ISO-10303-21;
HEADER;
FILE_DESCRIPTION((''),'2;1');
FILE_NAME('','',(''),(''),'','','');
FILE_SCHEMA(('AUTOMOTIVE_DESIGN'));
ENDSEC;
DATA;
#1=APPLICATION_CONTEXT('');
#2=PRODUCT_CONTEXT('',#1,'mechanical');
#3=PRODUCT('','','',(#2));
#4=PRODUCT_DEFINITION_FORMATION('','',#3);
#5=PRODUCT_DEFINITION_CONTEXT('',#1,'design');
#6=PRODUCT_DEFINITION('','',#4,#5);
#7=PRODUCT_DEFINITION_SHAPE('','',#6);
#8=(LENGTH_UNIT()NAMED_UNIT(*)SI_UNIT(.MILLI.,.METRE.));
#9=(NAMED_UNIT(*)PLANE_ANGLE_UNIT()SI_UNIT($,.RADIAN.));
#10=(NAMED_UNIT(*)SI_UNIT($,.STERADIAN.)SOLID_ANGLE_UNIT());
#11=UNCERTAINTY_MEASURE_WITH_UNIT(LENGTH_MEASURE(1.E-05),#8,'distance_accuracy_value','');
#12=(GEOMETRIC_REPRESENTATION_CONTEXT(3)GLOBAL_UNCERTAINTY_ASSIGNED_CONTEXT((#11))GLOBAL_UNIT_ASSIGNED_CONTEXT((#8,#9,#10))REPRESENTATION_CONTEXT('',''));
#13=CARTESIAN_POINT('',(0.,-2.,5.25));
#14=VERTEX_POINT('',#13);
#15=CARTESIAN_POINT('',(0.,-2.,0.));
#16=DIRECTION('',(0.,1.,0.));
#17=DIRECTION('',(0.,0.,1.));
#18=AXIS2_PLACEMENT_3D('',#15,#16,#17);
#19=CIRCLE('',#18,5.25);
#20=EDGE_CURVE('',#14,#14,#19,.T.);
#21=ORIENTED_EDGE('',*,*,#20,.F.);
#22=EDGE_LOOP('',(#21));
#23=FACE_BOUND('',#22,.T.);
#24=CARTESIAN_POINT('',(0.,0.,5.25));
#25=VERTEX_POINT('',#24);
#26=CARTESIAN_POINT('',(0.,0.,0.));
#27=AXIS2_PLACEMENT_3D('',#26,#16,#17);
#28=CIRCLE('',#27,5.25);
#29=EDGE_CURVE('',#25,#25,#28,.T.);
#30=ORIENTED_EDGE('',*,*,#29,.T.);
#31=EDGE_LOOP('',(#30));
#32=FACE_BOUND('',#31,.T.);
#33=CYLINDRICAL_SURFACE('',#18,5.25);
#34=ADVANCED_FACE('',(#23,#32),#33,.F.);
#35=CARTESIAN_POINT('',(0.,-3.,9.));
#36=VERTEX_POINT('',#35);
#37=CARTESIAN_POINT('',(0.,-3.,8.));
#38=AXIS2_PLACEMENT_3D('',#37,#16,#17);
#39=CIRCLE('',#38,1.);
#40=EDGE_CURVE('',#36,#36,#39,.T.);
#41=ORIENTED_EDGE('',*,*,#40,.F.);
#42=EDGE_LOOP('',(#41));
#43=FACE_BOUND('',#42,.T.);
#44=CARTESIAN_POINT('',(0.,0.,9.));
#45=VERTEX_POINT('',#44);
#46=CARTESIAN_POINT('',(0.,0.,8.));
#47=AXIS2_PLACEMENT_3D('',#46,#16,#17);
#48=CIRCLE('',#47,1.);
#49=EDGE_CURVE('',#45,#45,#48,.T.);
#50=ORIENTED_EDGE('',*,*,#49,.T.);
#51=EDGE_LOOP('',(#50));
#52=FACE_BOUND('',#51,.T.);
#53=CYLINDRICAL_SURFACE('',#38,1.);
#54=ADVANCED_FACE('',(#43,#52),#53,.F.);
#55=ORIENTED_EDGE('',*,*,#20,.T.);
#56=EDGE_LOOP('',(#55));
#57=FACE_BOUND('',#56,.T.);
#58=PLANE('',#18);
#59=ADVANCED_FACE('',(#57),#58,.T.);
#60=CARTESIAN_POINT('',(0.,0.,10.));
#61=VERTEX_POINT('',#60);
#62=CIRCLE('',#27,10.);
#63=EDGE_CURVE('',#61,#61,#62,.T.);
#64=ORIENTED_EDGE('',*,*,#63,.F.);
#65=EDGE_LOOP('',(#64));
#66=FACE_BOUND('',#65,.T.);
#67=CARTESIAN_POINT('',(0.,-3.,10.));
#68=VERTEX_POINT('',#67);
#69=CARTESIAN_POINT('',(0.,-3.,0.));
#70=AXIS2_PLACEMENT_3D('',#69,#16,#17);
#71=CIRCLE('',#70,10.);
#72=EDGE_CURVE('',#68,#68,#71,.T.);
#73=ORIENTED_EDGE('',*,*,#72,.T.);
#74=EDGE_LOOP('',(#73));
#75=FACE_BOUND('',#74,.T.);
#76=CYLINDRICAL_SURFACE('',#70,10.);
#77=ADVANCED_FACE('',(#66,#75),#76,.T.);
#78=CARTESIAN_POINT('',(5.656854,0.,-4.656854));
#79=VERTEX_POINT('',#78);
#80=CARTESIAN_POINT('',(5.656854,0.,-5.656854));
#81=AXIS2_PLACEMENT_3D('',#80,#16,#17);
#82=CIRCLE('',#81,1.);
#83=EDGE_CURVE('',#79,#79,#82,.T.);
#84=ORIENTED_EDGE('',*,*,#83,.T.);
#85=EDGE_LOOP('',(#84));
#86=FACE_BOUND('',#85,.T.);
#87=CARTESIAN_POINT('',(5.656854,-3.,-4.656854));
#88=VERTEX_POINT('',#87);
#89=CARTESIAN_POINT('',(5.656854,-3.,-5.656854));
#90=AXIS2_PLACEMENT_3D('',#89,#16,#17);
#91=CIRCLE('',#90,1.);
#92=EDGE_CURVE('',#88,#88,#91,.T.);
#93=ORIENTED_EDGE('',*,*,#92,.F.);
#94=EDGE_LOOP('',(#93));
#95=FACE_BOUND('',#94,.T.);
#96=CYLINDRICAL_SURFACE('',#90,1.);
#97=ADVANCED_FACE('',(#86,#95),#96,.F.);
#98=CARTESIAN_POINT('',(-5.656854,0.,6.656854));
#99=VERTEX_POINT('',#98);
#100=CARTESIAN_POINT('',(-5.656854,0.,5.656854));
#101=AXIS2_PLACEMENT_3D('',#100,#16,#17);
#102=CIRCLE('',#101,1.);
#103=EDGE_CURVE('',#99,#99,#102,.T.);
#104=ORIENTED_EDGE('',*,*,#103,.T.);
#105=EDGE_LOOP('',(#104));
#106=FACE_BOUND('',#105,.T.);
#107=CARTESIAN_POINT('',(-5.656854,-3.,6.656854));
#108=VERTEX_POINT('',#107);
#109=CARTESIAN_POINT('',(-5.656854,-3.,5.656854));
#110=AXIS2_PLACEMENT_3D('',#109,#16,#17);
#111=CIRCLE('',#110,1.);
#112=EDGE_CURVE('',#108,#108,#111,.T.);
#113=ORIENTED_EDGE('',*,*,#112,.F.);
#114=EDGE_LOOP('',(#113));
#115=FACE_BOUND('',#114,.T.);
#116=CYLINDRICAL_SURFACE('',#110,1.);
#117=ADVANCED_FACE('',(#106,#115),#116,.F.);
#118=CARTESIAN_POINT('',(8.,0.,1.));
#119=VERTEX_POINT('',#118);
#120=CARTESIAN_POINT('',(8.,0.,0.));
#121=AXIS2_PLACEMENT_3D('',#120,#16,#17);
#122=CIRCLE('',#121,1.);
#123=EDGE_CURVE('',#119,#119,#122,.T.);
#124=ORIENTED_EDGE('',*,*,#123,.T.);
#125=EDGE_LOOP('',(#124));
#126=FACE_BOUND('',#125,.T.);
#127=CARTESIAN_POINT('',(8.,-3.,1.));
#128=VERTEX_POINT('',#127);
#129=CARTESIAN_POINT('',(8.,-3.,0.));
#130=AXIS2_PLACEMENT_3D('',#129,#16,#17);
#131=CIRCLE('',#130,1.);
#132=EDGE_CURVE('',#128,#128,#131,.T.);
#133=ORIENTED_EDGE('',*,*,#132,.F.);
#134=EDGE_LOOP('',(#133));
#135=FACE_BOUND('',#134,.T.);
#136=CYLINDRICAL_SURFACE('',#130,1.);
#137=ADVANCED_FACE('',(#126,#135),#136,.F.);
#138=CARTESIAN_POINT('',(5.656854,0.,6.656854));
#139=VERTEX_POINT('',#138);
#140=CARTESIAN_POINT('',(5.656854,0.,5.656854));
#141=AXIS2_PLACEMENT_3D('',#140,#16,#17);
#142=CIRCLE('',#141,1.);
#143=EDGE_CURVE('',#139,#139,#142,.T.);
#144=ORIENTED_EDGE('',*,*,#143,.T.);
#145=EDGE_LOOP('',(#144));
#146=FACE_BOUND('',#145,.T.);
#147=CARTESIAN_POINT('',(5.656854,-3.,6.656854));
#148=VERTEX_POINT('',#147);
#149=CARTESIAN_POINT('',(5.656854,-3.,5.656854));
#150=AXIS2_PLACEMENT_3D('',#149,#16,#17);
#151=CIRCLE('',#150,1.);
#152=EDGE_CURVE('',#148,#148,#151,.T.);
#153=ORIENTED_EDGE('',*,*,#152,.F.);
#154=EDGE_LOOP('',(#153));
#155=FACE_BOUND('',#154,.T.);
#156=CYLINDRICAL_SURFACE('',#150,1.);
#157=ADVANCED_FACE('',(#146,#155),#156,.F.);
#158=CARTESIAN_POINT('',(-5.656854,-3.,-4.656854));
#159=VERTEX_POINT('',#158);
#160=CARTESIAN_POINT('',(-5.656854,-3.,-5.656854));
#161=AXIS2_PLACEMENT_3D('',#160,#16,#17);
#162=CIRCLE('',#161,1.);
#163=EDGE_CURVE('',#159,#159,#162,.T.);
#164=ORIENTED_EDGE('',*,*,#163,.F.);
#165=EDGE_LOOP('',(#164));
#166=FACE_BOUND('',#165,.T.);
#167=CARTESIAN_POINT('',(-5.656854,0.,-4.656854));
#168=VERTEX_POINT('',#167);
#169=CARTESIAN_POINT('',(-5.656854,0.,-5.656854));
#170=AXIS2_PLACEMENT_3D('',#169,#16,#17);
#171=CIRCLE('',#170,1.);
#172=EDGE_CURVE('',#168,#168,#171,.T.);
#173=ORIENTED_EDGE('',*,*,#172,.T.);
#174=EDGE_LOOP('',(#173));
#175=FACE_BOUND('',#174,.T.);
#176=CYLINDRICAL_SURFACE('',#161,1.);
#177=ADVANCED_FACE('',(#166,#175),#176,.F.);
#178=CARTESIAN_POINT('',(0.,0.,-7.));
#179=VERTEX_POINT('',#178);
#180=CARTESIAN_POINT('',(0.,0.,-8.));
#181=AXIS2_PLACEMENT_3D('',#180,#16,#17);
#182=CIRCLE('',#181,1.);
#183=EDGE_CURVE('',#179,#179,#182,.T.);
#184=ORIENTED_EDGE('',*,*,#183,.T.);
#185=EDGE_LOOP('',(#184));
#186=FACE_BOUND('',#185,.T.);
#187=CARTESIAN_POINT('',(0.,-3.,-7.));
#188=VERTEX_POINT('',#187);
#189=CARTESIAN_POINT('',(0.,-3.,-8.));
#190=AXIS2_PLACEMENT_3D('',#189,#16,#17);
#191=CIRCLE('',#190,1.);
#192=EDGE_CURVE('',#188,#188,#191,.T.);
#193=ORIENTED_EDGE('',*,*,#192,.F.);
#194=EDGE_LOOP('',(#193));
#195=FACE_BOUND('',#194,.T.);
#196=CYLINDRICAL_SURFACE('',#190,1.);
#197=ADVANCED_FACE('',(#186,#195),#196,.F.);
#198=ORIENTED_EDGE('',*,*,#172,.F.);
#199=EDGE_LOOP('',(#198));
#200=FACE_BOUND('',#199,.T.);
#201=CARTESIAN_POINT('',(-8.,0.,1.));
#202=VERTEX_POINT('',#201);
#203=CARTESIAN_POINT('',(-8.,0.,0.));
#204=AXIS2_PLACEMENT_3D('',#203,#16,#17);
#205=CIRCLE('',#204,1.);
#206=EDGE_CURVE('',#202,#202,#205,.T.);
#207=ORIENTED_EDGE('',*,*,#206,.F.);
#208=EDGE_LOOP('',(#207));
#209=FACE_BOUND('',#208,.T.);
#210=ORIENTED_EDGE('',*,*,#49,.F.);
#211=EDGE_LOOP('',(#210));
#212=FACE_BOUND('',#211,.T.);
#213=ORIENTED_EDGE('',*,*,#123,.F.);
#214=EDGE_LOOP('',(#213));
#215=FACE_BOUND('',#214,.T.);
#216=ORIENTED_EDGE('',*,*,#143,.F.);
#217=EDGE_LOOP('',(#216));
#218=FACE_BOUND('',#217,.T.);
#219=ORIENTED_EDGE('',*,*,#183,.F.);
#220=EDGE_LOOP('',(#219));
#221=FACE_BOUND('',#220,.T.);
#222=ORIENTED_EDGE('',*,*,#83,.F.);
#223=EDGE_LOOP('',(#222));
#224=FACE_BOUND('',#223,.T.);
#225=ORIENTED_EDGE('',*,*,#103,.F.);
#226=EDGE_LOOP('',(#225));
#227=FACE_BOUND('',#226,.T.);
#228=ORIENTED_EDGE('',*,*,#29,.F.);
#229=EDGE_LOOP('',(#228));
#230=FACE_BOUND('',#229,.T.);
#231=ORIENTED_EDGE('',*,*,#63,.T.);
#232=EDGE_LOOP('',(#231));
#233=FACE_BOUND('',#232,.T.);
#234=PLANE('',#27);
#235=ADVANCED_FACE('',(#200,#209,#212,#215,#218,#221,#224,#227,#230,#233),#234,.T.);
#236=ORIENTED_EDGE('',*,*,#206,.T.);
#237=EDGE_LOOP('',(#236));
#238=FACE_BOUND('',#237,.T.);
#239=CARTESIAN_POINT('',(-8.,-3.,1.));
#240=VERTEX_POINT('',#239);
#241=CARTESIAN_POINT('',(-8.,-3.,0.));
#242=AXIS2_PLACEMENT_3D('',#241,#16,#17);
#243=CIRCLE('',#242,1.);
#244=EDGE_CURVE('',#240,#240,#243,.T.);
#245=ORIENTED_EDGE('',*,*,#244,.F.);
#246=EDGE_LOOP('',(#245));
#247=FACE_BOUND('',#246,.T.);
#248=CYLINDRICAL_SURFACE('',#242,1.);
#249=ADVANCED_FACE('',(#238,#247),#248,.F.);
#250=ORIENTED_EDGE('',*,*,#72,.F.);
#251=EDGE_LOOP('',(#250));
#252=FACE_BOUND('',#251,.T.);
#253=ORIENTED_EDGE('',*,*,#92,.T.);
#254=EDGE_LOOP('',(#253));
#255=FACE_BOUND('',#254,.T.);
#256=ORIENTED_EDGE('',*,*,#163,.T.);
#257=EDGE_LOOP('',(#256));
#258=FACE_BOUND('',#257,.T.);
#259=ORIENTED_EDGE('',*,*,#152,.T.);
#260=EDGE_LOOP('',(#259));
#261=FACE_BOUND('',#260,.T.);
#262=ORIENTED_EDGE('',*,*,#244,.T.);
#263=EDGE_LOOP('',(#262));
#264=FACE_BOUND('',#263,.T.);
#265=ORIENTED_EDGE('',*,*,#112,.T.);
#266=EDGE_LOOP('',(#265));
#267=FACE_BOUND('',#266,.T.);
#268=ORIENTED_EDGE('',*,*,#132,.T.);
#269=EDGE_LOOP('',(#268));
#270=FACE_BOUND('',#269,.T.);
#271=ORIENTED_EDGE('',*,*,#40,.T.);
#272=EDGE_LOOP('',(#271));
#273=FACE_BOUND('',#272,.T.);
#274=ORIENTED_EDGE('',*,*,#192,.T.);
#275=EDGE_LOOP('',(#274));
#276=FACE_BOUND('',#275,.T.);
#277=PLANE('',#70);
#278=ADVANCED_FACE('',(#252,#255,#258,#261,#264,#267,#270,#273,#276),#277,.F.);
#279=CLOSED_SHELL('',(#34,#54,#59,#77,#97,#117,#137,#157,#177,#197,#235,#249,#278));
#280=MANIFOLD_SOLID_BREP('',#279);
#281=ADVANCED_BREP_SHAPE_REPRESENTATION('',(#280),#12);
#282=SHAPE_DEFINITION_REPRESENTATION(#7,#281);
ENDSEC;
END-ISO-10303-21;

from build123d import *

# Parameters (mm, degrees)
SKETCH_1_R             = 10
SM_BASE_FLANGE_1_DEPTH = 3
SKETCH_6_R             = 5.25
CUT_EXTRUDE_1_DEPTH    = 2
SKETCH_7_R             = 1
CUT_EXTRUDE_2_DEPTH    = 15.456832295


# Sheet-metal steps are written as plain solids
with BuildPart() as part:
    # Sketch 1 → 基体-法兰1 (new body)
    with BuildSketch(Plane(origin=(0, 0, 0), x_dir=(1, 0, 0), z_dir=(0, 1, 0))):
        with Locations(Location((0, 0, 0), (0, 0, 270))):
            Circle(SKETCH_1_R)
    extrude(amount=-SM_BASE_FLANGE_1_DEPTH)

    # 草图6 → 切除-拉伸1 (cut)
    with BuildSketch(Plane(origin=(0, 0, 0), x_dir=(1, 0, 0), z_dir=(0, 1, 0))):
        with Locations(Location((0, 0, 0), (0, 0, 270))):
            Circle(SKETCH_6_R)
    extrude(amount=-CUT_EXTRUDE_1_DEPTH, mode=Mode.SUBTRACT)

    # 草图7 → 切除-拉伸2 (cut, through all)
    with BuildSketch(Plane(origin=(0, 0, 0), x_dir=(1, 0, 0), z_dir=(0, 1, 0))):
        with Locations(Location((0, 8, 0), (0, 0, 270))):
            Circle(SKETCH_7_R)
        with Locations(Location((5.656854249, 5.656854249, 0), (0, 0, 270))):
            Circle(SKETCH_7_R)
        with Locations(Location((8, 0, 0), (0, 0, 270))):
            Circle(SKETCH_7_R)
        with Locations(Location((5.656854249, -5.656854249, 0), (0, 0, 270))):
            Circle(SKETCH_7_R)
        with Locations(Location((0, -8, 0), (0, 0, 270))):
            Circle(SKETCH_7_R)
        with Locations(Location((-5.656854249, -5.656854249, 0), (0, 0, 270))):
            Circle(SKETCH_7_R)
        with Locations(Location((-8, 0, 0), (0, 0, 270))):
            Circle(SKETCH_7_R)
        with Locations(Location((-5.656854249, 5.656854249, 0), (0, 0, 270))):
            Circle(SKETCH_7_R)
    extrude(amount=-CUT_EXTRUDE_2_DEPTH, mode=Mode.SUBTRACT)


solid = part.part
